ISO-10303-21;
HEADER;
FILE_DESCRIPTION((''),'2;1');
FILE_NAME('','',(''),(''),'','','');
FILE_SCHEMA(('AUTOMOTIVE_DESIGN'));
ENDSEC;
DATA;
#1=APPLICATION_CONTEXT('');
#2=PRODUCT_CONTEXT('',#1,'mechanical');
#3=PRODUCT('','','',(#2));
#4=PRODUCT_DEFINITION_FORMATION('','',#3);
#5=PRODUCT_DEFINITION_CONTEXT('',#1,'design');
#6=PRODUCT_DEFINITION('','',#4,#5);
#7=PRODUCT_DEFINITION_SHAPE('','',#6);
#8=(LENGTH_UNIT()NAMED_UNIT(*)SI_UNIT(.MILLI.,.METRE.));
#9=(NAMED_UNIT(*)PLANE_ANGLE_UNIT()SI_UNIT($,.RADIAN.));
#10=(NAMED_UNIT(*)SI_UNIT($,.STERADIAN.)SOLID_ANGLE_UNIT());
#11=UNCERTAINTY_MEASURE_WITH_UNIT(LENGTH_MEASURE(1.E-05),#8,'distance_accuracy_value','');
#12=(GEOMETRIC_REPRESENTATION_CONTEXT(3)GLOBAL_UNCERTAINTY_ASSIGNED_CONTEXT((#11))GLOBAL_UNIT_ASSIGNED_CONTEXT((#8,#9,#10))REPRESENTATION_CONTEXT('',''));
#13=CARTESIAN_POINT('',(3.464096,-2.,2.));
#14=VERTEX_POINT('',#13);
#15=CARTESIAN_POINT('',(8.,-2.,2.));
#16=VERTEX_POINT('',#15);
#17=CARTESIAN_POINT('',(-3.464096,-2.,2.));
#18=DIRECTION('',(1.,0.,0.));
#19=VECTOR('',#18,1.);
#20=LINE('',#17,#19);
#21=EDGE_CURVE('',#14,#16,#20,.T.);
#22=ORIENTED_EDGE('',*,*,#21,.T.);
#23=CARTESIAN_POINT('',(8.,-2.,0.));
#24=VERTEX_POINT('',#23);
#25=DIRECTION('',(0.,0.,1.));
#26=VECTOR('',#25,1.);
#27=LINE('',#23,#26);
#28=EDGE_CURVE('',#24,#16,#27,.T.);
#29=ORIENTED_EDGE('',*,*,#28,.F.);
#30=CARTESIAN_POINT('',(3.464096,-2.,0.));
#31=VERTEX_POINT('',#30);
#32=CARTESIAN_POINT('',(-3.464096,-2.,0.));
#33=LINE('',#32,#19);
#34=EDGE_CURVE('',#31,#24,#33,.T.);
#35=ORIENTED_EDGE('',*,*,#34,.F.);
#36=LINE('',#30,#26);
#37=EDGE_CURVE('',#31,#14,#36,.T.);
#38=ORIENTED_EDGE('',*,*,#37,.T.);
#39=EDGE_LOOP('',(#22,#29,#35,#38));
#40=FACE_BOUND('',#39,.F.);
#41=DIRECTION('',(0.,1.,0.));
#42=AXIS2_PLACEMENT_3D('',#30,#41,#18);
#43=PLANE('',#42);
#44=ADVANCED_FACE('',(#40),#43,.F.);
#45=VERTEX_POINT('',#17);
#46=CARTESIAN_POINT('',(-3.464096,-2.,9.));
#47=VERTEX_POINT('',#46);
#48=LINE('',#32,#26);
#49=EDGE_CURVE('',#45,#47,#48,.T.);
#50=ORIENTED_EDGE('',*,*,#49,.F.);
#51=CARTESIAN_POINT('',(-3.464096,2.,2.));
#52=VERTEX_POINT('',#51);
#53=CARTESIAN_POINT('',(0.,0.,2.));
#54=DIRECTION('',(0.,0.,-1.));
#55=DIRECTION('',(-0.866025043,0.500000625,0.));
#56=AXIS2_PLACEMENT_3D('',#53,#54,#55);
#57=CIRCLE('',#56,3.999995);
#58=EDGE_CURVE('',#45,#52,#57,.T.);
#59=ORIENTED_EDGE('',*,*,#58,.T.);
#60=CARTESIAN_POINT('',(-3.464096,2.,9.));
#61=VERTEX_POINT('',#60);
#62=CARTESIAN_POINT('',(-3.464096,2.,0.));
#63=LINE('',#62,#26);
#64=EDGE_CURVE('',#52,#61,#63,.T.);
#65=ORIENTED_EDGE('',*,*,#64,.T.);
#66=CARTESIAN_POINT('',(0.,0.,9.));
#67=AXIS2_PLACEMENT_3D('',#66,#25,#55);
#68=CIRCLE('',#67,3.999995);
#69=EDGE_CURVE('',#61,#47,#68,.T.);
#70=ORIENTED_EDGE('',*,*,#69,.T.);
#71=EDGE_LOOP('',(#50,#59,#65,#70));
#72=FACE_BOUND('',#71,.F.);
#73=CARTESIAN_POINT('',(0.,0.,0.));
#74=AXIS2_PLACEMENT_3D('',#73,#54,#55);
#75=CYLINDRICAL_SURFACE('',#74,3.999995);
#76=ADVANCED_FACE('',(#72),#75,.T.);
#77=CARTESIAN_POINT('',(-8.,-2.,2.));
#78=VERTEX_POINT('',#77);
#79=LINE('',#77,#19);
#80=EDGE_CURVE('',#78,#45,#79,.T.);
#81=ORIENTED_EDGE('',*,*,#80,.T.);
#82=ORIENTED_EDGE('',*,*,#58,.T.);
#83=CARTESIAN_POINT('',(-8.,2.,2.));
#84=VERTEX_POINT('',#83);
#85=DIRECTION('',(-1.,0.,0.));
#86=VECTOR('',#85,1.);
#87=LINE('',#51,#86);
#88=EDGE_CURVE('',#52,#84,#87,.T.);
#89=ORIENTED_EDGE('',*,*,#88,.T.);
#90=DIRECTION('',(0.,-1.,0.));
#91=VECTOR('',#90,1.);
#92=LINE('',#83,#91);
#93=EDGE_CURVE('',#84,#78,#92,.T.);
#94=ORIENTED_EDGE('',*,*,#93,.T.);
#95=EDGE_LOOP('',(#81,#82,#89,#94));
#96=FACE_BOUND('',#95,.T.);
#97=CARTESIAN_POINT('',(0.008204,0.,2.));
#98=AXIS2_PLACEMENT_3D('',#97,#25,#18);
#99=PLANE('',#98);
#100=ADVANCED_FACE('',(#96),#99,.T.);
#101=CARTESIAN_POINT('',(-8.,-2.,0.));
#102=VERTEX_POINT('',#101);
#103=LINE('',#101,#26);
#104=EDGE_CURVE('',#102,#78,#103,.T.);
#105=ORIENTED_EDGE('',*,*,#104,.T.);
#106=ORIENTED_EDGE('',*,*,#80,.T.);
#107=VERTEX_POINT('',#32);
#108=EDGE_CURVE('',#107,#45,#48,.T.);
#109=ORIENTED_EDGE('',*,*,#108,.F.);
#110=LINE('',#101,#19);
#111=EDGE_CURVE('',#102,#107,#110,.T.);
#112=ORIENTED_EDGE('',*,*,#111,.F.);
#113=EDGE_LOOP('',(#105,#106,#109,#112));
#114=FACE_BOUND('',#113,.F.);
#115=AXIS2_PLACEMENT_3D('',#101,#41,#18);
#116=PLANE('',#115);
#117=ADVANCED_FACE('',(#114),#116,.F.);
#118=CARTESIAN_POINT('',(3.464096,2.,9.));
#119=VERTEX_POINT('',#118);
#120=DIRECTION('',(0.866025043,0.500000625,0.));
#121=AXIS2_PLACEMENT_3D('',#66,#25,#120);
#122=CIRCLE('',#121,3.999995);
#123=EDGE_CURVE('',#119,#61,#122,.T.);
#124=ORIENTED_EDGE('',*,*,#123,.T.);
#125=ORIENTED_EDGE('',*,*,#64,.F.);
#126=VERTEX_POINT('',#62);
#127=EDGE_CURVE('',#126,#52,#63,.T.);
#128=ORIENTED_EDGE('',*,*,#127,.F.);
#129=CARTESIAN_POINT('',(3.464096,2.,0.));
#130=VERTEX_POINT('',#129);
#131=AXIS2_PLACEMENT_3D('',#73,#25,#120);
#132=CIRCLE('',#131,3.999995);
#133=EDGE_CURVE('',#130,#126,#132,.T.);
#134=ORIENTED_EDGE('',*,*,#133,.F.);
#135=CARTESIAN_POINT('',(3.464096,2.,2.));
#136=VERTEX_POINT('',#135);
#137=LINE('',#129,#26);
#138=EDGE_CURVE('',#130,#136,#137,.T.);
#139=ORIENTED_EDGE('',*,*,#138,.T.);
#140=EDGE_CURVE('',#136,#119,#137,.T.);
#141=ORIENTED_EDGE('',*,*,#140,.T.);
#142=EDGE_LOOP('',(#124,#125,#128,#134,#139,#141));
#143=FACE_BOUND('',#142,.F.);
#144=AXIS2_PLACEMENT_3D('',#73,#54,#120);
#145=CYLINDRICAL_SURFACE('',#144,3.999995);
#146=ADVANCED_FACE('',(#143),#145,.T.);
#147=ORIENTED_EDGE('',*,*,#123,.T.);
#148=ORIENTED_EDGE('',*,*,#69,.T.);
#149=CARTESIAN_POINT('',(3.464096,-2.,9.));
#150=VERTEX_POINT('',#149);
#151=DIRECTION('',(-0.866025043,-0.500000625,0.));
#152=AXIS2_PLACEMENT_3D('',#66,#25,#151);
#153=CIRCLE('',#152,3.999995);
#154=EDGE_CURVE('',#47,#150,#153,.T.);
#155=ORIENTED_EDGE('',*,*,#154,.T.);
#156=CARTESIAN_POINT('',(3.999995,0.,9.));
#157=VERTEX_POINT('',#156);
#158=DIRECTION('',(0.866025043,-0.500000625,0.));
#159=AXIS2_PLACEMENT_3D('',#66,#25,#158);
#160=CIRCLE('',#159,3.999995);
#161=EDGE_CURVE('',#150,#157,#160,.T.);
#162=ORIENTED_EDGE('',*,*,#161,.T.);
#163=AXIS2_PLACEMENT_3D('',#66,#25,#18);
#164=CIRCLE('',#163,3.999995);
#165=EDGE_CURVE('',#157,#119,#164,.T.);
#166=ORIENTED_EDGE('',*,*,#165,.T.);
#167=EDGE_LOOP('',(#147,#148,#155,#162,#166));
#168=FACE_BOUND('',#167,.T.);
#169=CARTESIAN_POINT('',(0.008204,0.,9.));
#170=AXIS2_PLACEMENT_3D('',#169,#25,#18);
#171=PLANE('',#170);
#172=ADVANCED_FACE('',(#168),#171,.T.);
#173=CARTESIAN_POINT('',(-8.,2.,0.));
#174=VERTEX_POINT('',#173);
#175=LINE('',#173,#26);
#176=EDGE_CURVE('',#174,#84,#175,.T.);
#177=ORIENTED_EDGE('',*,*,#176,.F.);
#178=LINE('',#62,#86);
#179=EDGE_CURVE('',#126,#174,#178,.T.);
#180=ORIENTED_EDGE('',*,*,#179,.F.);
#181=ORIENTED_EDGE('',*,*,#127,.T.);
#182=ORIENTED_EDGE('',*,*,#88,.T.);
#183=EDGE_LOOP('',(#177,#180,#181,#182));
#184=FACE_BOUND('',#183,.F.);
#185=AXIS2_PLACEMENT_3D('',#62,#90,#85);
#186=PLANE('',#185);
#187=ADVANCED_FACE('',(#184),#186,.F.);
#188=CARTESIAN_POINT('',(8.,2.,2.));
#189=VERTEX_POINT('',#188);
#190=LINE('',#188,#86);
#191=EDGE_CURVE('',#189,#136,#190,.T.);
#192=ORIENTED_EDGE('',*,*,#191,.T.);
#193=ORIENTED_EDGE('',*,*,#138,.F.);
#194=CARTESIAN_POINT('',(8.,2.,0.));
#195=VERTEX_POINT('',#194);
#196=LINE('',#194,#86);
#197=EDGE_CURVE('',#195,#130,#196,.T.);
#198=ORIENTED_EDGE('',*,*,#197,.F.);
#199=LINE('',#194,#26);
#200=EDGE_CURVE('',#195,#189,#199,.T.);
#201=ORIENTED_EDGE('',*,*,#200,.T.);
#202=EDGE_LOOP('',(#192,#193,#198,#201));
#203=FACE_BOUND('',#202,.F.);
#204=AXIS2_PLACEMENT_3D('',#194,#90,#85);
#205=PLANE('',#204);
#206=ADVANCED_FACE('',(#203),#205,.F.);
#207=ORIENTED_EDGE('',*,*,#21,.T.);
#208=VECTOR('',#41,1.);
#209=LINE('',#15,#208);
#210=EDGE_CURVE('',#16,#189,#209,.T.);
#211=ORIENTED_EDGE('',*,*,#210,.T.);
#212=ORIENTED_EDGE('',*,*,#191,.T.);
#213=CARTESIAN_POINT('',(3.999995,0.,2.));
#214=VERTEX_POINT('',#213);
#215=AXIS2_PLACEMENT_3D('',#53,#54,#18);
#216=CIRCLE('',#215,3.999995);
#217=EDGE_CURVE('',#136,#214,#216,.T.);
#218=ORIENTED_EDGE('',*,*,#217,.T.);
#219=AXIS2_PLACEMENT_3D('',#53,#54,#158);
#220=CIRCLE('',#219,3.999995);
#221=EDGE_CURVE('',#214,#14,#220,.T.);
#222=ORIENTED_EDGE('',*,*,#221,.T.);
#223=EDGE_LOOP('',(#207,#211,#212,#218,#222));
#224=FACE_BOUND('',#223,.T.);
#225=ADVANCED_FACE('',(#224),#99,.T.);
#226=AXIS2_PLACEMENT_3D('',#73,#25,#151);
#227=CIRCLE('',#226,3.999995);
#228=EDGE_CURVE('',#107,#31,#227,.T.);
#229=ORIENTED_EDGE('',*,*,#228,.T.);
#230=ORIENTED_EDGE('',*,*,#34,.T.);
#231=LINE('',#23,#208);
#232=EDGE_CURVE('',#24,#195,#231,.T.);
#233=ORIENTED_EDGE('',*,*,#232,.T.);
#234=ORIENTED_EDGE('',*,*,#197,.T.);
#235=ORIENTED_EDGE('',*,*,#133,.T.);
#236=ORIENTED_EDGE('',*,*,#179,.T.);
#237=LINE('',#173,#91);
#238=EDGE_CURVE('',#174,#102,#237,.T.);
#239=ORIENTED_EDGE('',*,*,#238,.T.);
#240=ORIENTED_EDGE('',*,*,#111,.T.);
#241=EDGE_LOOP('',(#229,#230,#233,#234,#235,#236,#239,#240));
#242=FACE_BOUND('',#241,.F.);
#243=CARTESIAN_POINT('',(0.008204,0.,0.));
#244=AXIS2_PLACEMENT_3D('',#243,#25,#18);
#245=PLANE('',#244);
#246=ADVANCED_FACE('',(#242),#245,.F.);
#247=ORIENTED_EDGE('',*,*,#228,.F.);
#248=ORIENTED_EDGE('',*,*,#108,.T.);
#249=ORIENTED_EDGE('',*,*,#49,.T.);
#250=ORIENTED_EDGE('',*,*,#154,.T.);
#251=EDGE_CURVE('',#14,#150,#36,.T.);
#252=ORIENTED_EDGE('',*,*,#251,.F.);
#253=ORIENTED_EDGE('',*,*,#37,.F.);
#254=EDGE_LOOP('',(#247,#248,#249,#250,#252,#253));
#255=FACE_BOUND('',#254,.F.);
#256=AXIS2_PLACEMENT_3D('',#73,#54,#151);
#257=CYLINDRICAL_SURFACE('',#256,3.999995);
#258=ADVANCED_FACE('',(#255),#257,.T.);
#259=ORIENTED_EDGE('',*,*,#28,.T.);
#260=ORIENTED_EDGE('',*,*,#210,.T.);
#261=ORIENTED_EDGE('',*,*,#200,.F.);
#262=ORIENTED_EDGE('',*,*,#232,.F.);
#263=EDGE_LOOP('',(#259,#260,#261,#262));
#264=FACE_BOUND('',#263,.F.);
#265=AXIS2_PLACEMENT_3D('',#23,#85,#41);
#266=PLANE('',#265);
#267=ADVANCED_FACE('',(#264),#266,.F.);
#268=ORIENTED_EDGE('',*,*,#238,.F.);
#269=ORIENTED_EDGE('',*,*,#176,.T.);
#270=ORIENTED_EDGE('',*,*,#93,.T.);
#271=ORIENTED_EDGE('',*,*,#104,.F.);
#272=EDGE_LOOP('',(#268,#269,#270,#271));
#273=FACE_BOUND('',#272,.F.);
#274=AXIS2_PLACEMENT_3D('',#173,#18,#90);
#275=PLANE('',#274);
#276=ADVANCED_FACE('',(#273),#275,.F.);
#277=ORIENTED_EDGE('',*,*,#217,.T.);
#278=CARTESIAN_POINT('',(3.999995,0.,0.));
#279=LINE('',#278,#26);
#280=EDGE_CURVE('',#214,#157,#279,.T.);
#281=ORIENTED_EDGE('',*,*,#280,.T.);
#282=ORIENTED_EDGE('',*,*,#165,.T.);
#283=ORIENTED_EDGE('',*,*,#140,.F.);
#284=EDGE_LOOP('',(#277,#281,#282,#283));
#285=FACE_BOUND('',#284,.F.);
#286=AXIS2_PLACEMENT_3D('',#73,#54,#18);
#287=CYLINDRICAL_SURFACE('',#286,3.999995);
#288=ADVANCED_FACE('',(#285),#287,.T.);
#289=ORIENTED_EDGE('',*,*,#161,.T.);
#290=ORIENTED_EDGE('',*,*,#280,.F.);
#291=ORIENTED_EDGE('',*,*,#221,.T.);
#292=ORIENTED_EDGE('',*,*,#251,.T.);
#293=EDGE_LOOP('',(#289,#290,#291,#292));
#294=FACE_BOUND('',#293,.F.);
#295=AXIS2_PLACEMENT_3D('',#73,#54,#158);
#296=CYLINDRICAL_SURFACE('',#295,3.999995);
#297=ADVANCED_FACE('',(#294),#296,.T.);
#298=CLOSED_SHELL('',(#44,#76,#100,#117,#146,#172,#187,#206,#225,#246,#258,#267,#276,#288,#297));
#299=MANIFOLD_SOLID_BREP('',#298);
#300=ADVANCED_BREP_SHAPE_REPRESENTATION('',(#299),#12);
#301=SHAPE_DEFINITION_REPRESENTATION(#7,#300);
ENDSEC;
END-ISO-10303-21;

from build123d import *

# Parameters (mm, degrees)
F1_DEPTH = 9
F2_DEPTH = 2


with BuildPart() as f1:
    # F0 (on Top) → F1 (new body)
    with BuildSketch(Plane.XY):
        with BuildLine():
            ThreePointArc((3.4640958416, -2), (3.863698102, -1.0352762805), (3.999995, 0))
            ThreePointArc((3.999995, 0), (3.863698102, 1.0352762805), (3.4640958416, 2))
            Line((3.4640958416, 2), (-3.4640958416, 2))
            ThreePointArc((-3.4640958416, 2), (-3.999995, 0), (-3.4640958416, -2))
            Line((-3.4640958416, -2), (3.4640958416, -2))
        make_face()
        with BuildLine():
            Line((-3.4640958416, 2), (3.4640958416, 2))
            ThreePointArc((3.4640958416, 2), (0, 3.999995), (-3.4640958416, 2))
        make_face()
        with BuildLine():
            ThreePointArc((-3.4640958416, -2), (0, -3.999995), (3.4640958416, -2))
            Line((3.4640958416, -2), (-3.4640958416, -2))
        make_face()
    extrude(amount=F1_DEPTH)

    # F0 (on Top) → F2 (join)
    with BuildSketch(Plane.XY):
        with BuildLine():
            ThreePointArc((3.4640958416, -2), (3.863698102, -1.0352762805), (3.999995, 0))
            ThreePointArc((3.999995, 0), (3.863698102, 1.0352762805), (3.4640958416, 2))
            Line((3.4640958416, 2), (-3.4640958416, 2))
            ThreePointArc((-3.4640958416, 2), (-3.999995, 0), (-3.4640958416, -2))
            Line((-3.4640958416, -2), (3.4640958416, -2))
        make_face()
        with BuildLine():
            ThreePointArc((3.4640958416, 2), (3.863698102, 1.0352762805), (3.999995, 0))
            ThreePointArc((3.999995, 0), (3.863698102, -1.0352762805), (3.4640958416, -2))
            Line((3.4640958416, -2), (8, -2))
            Line((8, -2), (8, 2))
            Line((8, 2), (3.4640958416, 2))
        make_face()
        with BuildLine():
            Line((-3.4640958416, 2), (3.4640958416, 2))
            ThreePointArc((3.4640958416, 2), (0, 3.999995), (-3.4640958416, 2))
        make_face()
        with BuildLine():
            ThreePointArc((-3.4640958416, -2), (0, -3.999995), (3.4640958416, -2))
            Line((3.4640958416, -2), (-3.4640958416, -2))
        make_face()
        with BuildLine():
            ThreePointArc((-3.4640958416, -2), (-3.999995, 0), (-3.4640958416, 2))
            Line((-3.4640958416, 2), (-8, 2))
            Line((-8, 2), (-8, -2))
            Line((-8, -2), (-3.4640958416, -2))
        make_face()
    extrude(amount=F2_DEPTH)


solid = f1.part
